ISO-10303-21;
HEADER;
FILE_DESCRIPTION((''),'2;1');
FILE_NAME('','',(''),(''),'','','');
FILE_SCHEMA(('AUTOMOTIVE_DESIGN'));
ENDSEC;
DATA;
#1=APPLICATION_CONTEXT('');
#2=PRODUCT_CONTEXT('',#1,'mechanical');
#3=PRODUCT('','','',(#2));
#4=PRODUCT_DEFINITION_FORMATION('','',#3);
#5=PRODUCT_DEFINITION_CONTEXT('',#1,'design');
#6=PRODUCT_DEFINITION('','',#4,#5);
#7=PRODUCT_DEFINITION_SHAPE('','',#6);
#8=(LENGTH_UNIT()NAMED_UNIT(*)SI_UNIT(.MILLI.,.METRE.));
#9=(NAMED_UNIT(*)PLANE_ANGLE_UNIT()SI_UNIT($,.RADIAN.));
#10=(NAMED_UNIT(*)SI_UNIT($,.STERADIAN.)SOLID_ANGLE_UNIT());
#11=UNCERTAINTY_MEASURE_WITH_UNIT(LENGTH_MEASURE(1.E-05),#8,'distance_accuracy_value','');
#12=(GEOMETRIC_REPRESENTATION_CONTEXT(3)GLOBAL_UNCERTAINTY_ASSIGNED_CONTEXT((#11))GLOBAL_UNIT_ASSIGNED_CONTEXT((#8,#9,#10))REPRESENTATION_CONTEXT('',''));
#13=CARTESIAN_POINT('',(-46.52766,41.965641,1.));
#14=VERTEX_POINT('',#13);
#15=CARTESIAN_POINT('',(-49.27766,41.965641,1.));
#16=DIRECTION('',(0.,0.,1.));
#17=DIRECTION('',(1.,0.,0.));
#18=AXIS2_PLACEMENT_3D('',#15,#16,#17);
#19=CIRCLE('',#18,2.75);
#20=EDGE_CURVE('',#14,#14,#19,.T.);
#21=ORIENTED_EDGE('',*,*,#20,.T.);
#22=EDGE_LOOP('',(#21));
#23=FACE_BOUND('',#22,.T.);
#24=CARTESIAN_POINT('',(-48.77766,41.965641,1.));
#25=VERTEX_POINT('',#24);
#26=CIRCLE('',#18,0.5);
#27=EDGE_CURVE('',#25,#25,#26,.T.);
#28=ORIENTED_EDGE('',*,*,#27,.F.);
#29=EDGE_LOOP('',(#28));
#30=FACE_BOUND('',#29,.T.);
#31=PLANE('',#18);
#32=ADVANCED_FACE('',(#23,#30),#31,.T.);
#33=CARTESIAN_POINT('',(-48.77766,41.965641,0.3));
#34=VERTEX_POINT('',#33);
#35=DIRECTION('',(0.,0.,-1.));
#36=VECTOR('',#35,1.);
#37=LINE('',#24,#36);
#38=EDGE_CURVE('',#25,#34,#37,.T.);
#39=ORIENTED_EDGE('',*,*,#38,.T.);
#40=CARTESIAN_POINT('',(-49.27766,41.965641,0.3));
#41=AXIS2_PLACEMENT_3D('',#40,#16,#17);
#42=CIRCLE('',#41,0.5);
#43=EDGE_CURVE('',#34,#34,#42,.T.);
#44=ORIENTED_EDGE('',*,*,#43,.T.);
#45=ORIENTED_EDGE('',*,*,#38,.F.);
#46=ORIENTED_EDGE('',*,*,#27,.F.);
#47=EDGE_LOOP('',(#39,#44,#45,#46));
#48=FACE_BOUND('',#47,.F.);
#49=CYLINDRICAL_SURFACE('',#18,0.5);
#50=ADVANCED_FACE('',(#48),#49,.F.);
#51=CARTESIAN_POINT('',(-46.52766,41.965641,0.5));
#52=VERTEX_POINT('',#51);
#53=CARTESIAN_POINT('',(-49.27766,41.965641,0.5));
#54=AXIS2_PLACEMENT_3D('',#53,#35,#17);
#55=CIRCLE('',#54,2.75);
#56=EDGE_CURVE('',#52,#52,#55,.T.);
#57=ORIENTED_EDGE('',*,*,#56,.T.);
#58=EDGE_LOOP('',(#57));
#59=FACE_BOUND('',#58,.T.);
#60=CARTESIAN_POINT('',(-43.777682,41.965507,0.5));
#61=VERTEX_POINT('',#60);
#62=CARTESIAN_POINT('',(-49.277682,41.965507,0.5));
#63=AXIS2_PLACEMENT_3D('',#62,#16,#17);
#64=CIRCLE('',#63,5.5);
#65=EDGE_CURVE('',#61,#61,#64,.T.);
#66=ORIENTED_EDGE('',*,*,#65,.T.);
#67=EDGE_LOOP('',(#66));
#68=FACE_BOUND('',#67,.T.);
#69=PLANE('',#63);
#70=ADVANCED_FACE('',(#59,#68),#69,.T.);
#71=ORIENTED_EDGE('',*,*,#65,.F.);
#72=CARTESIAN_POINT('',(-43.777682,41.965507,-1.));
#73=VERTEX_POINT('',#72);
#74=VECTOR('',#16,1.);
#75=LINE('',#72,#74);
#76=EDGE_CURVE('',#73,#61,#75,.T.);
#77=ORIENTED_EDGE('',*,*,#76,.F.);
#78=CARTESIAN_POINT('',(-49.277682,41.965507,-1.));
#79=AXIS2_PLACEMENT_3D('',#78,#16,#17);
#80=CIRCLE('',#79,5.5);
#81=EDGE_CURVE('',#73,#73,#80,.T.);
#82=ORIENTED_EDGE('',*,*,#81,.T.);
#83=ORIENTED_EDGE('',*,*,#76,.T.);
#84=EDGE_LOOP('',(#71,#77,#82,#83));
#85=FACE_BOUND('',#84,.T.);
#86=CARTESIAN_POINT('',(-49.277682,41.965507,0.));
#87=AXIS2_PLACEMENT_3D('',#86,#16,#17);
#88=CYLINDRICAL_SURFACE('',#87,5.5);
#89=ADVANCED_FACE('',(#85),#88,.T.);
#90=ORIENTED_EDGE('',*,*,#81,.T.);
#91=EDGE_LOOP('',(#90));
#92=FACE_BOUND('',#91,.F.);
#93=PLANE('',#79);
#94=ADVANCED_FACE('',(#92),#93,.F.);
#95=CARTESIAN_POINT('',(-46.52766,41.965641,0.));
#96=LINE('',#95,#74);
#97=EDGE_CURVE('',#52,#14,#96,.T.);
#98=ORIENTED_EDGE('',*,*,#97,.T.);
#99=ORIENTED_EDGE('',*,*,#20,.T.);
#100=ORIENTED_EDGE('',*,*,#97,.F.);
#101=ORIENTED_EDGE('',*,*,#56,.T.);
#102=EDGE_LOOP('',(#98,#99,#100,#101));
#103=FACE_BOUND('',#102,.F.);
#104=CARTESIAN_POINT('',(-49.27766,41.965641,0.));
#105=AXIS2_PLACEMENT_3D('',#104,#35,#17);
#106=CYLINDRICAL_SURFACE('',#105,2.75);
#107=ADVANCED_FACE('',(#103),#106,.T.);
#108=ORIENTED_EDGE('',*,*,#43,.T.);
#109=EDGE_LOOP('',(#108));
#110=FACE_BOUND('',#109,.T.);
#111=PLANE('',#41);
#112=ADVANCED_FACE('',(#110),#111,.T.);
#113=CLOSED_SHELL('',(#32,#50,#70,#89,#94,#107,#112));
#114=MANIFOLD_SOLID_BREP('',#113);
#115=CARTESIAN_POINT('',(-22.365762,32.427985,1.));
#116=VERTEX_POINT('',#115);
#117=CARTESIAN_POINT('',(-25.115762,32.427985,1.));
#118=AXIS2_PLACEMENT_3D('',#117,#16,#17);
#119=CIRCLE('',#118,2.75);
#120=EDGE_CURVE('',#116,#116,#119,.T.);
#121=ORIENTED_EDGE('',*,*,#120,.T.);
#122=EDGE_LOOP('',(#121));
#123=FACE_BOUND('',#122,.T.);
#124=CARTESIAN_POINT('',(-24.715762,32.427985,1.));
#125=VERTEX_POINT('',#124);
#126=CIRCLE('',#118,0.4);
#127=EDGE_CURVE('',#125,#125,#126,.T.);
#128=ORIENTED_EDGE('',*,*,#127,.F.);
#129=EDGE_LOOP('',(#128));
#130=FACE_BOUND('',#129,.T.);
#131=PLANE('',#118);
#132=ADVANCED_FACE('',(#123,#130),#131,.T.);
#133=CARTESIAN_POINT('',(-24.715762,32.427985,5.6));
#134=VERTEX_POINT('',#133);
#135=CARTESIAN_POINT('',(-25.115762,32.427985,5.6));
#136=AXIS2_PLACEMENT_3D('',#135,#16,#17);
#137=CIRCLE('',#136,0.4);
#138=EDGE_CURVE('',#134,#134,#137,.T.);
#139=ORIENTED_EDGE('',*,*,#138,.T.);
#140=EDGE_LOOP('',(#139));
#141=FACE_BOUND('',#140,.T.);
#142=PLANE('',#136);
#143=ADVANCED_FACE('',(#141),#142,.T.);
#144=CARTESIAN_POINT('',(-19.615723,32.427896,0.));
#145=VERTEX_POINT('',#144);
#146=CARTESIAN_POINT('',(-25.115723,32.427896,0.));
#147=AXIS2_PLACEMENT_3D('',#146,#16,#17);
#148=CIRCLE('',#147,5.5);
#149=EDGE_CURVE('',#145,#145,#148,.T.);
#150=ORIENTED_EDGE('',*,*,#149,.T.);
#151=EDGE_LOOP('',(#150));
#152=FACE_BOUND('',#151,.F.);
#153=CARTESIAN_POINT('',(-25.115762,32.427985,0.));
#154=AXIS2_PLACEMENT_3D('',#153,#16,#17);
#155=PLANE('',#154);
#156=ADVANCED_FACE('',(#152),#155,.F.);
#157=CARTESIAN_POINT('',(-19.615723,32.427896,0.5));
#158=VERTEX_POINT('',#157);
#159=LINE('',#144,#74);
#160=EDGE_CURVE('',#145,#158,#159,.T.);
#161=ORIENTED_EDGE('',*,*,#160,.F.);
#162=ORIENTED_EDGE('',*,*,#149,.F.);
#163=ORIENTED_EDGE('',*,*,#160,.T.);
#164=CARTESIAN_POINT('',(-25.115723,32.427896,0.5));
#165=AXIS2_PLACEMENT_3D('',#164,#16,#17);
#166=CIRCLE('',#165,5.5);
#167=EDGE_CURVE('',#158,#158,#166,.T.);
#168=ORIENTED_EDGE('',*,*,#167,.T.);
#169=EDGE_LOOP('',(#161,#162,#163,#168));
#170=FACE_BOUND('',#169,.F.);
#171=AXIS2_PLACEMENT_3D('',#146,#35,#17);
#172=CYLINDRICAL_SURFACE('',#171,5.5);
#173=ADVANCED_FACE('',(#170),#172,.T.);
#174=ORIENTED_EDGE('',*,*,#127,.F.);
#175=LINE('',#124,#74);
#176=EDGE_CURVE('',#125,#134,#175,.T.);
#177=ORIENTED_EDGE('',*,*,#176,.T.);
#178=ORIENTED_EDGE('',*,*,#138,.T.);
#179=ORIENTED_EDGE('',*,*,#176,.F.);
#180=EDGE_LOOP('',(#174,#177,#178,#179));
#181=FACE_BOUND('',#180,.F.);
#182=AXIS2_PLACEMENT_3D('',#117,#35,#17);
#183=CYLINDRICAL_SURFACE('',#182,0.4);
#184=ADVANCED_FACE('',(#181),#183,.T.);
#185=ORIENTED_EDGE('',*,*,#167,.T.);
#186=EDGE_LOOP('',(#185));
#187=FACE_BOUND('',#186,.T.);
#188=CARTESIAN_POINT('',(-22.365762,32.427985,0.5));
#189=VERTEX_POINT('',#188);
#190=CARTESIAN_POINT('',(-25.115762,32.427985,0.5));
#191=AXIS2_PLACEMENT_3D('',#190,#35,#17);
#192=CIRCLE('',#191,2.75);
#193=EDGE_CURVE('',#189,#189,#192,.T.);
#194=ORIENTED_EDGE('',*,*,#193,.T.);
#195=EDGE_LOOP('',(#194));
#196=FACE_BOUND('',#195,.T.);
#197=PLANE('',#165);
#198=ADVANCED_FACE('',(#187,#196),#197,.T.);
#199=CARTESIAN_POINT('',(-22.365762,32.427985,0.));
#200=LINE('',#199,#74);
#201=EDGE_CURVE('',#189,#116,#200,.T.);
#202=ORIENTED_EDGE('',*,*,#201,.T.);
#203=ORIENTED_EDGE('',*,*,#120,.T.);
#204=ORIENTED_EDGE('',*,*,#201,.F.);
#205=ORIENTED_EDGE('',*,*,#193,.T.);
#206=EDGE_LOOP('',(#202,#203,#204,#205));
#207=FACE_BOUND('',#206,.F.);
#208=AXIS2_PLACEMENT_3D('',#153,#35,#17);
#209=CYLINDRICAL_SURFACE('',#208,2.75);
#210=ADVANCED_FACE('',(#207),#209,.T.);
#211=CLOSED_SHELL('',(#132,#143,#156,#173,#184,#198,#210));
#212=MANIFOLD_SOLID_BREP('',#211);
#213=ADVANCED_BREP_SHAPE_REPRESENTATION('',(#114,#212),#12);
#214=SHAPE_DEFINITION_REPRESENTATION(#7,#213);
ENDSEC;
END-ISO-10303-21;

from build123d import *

# Parameters (mm, degrees)
F0_R      = 5.5
F1_DEPTH  = 0.5
F2_R      = 5.5
F3_DEPTH  = 0.5
F4_R      = 2.75
F5_DEPTH  = 1
F6_R      = 2.75
F7_DEPTH  = 1
F8_R      = 0.5
F9_DEPTH  = 0.7
F10_R     = 0.4
F11_DEPTH = 4.6
F13_DEPTH = 1


# Not quite as in the source:
# - the program builds the solid bodies; features that only make, move or delete a surface that nothing else refers to are left out


with BuildPart() as f1:
    # F0 (on Top) → F1 (new body)
    with BuildSketch(Plane.XY):
        with Locations((-49.2776818573, 41.9655069709)):
            Circle(F0_R)
    extrude(amount=F1_DEPTH)

    # F4 (on Top) → F5 (join)
    with BuildSketch(Plane.XY):
        with Locations((-49.2776595056, 41.9656410813)):
            Circle(F4_R)
    extrude(amount=F5_DEPTH)

    # F8 (on face) → F9 (cut)
    with BuildSketch(Plane.XY.offset(1)):
        with Locations((-49.2776595056, 41.9656410813)):
            Circle(F8_R)
    extrude(amount=-F9_DEPTH, mode=Mode.SUBTRACT)

    # F0 (on Top) → F13 (join)
    with BuildSketch(Plane.XY):
        with Locations((-49.2776818573, 41.9655069709)):
            Circle(F0_R)
    extrude(amount=-F13_DEPTH)


with BuildPart() as f3:
    # F2 (on Top) → F3 (new body)
    with BuildSketch(Plane.XY):
        with Locations((-25.1157227904, 32.4278958142)):
            Circle(F2_R)
    extrude(amount=F3_DEPTH)

    # F6 (on Top) → F7 (join)
    with BuildSketch(Plane.XY):
        with Locations((-25.1157619059, 32.4279852211)):
            Circle(F6_R)
    extrude(amount=F7_DEPTH)

    # F10 (on face) → F11 (join)
    with BuildSketch(Plane.XY.offset(1)):
        with Locations((-25.1157619059, 32.4279852211)):
            Circle(F10_R)
    extrude(amount=F11_DEPTH)


solid = Compound([f1.part, f3.part])
